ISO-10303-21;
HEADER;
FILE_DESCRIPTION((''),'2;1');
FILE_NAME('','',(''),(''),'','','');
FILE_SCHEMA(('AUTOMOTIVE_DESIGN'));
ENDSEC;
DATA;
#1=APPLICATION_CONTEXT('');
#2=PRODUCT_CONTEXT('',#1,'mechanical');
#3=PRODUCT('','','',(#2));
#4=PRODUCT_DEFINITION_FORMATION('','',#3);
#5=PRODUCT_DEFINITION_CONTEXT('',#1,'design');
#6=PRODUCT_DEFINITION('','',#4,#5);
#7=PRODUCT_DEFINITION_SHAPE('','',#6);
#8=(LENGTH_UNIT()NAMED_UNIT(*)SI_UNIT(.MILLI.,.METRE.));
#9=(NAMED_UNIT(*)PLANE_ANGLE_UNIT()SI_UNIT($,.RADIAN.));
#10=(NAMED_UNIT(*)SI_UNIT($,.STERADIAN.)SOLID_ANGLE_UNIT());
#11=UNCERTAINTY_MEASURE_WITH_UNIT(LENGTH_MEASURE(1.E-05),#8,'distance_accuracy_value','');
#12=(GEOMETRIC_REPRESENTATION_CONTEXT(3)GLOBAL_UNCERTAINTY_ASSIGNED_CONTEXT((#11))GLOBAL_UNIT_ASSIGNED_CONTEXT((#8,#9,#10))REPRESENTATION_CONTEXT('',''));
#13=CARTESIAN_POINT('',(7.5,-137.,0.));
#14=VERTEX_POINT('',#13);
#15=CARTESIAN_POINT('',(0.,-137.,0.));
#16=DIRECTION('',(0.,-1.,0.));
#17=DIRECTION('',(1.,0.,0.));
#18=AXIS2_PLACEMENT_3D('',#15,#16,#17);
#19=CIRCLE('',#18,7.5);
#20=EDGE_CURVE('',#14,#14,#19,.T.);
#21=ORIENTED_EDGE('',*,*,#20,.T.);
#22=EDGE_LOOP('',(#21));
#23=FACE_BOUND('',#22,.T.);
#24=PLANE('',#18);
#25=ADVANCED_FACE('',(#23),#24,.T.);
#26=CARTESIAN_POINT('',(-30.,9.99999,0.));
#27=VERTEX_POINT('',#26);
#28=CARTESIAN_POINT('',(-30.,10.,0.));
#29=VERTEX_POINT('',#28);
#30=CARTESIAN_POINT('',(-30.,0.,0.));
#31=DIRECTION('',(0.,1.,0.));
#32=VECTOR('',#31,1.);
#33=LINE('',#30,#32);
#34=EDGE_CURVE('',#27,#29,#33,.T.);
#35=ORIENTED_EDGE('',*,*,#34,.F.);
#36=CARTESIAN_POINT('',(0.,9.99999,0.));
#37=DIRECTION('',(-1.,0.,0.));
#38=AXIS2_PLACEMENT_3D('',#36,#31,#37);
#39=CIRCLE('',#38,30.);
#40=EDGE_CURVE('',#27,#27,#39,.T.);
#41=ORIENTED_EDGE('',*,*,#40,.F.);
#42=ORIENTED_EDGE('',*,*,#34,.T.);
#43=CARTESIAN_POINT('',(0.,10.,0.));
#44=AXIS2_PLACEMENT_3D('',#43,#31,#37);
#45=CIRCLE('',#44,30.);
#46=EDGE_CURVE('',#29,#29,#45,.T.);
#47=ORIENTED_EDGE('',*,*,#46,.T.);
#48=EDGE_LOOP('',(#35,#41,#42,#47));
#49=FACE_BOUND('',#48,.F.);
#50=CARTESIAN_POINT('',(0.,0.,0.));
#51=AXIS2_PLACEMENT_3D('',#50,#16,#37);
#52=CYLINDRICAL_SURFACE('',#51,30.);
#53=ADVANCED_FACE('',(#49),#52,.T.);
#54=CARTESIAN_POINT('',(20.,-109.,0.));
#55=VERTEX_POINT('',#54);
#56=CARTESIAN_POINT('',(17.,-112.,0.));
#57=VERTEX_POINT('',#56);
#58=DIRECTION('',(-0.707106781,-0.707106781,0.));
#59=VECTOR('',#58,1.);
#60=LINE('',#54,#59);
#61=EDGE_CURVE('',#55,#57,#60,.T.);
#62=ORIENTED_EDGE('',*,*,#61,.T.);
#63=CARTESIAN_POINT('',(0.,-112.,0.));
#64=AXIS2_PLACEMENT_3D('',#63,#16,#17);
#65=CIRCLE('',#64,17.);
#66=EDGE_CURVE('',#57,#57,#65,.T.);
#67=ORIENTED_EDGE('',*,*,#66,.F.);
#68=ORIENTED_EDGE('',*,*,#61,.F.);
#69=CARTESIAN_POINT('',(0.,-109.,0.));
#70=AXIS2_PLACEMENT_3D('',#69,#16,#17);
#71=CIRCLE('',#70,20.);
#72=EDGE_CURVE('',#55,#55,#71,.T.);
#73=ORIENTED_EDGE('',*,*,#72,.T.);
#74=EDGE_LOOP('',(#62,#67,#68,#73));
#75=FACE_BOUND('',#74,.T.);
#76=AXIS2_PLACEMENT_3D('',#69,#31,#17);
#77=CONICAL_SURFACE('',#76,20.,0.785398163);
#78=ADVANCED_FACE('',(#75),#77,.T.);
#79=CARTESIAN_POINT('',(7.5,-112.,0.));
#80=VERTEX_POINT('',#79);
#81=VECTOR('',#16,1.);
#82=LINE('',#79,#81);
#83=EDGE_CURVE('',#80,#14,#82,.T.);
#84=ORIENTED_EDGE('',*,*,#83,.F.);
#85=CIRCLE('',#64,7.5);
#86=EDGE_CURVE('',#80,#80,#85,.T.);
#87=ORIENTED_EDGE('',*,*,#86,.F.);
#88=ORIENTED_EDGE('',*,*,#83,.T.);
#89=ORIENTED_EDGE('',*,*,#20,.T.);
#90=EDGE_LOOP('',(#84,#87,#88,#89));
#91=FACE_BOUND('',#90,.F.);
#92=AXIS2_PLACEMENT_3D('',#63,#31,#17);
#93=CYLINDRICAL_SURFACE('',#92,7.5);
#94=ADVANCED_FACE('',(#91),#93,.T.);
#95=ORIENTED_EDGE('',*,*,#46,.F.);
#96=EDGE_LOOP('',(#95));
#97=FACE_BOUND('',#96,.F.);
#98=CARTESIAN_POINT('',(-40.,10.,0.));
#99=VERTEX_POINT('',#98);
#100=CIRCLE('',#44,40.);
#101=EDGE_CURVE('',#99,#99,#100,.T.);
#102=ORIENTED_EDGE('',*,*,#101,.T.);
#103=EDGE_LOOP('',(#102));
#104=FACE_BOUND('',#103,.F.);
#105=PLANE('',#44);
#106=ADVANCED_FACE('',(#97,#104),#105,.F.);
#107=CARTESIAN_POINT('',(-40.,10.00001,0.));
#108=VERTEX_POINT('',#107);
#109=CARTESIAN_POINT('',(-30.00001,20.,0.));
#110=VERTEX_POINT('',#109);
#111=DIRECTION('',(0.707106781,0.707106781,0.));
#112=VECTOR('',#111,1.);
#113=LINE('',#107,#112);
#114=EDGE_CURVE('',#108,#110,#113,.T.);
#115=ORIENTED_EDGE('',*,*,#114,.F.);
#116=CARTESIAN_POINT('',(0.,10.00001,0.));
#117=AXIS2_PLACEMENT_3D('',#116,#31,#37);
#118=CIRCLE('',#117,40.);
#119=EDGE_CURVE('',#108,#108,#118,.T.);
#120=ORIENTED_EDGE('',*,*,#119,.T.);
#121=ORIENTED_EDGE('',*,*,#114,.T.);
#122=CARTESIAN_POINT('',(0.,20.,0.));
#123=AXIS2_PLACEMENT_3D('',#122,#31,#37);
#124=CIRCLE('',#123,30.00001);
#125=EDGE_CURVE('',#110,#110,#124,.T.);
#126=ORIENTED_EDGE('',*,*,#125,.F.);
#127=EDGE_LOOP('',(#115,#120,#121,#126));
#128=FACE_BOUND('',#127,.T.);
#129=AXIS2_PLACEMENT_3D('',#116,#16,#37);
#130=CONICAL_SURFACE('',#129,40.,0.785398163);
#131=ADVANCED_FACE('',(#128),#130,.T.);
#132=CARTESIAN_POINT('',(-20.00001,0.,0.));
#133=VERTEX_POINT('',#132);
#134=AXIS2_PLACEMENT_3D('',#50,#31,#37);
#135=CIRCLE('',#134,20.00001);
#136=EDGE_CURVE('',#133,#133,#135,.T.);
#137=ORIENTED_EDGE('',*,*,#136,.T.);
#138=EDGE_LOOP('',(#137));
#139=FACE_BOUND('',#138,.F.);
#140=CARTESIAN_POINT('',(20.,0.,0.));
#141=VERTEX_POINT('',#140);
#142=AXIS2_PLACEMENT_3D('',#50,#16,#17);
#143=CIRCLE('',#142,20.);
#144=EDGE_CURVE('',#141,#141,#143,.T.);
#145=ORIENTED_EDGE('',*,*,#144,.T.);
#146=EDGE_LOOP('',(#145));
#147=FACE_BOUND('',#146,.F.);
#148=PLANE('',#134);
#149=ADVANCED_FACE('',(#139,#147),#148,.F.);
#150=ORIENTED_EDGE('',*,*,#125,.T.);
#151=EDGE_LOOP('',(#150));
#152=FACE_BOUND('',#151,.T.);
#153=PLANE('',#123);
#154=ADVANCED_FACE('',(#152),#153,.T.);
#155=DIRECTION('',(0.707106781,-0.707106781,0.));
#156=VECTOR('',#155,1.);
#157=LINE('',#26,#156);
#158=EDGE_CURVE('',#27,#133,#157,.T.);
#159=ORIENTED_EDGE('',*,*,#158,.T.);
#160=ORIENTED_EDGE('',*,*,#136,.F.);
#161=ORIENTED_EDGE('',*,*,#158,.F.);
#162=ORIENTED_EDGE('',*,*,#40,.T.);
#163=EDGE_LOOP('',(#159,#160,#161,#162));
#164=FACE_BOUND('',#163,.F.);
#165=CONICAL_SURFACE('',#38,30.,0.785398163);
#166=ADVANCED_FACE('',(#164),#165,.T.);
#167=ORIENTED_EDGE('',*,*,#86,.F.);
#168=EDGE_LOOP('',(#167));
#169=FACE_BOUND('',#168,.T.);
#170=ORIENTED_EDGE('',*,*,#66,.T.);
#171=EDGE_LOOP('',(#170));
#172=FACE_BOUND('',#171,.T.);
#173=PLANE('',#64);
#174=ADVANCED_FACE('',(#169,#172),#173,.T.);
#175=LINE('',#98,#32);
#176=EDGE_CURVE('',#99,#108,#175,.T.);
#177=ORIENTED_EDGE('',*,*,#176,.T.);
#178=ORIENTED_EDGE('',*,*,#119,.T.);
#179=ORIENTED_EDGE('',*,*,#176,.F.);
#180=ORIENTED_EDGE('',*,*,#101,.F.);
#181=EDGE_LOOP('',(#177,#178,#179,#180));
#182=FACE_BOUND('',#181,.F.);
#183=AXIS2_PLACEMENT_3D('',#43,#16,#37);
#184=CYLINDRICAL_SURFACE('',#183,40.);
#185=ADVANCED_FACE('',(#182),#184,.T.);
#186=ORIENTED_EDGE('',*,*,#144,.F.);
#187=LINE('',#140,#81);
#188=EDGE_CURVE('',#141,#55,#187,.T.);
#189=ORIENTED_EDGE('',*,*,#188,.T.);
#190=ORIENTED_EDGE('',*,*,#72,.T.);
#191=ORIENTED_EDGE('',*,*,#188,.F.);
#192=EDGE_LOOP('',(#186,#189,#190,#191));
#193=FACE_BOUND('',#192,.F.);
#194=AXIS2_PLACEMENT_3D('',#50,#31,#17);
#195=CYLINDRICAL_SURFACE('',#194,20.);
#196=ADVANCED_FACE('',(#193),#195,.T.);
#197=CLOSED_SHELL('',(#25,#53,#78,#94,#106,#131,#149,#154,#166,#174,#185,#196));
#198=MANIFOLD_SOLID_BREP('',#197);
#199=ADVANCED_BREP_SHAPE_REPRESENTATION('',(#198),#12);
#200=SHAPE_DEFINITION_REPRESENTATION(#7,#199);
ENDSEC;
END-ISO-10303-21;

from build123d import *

# Parameters (mm, degrees)
F0_R     = 20
F1_DEPTH = 112
F2_SIZE  = 3
F3_R     = 7.5
F4_DEPTH = 25
F5_R     = 30
F6_DEPTH = 10
F7_SIZE  = 9.99999
F8_R     = 40
F9_DEPTH = 10
F10_SIZE = 9.99999


# Not quite as in the source:
# - a fillet or chamfer is up to 0.001 mm smaller than in the source, because OpenCascade refuses the exact size


with BuildPart() as f1:
    # F0 (on Front) → F1 (new body)
    with BuildSketch(Plane.XZ):
        Circle(F0_R)
    extrude(amount=F1_DEPTH)

    # F2
    f2_edges = [f1.edges().sort_by_distance(p)[0] for p in [
        (-20, -112, 0),
    ]]
    chamfer(f2_edges, length=F2_SIZE)

    # F3 (on face) → F4 (join)
    with BuildSketch(Plane.XZ.offset(112)):
        Circle(F3_R)
    extrude(amount=F4_DEPTH)

    # F5 (on face) → F6 (join)
    with BuildSketch(Plane(origin=(0, 0, 0), x_dir=(-1, 0, 0), z_dir=(0, 1, 0))):
        Circle(F5_R)
    extrude(amount=F6_DEPTH)

    # F7 (size 10 in the source; OpenCascade refuses exactly that, so slightly less here)
    f7_edges = [f1.edges().sort_by_distance(p)[0] for p in [
        (30, 0, 0),
    ]]
    chamfer(f7_edges, length=F7_SIZE)

    # F8 (on face) → F9 (join)
    with BuildSketch(Plane(origin=(0, 10, 0), x_dir=(-1, 0, 0), z_dir=(0, 1, 0))):
        Circle(F8_R)
    extrude(amount=F9_DEPTH)

    # F10 (size 10 in the source; OpenCascade refuses exactly that, so slightly less here)
    f10_edges = [f1.edges().sort_by_distance(p)[0] for p in [
        (40, 20, 0),
    ]]
    chamfer(f10_edges, length=F10_SIZE)


solid = f1.part
